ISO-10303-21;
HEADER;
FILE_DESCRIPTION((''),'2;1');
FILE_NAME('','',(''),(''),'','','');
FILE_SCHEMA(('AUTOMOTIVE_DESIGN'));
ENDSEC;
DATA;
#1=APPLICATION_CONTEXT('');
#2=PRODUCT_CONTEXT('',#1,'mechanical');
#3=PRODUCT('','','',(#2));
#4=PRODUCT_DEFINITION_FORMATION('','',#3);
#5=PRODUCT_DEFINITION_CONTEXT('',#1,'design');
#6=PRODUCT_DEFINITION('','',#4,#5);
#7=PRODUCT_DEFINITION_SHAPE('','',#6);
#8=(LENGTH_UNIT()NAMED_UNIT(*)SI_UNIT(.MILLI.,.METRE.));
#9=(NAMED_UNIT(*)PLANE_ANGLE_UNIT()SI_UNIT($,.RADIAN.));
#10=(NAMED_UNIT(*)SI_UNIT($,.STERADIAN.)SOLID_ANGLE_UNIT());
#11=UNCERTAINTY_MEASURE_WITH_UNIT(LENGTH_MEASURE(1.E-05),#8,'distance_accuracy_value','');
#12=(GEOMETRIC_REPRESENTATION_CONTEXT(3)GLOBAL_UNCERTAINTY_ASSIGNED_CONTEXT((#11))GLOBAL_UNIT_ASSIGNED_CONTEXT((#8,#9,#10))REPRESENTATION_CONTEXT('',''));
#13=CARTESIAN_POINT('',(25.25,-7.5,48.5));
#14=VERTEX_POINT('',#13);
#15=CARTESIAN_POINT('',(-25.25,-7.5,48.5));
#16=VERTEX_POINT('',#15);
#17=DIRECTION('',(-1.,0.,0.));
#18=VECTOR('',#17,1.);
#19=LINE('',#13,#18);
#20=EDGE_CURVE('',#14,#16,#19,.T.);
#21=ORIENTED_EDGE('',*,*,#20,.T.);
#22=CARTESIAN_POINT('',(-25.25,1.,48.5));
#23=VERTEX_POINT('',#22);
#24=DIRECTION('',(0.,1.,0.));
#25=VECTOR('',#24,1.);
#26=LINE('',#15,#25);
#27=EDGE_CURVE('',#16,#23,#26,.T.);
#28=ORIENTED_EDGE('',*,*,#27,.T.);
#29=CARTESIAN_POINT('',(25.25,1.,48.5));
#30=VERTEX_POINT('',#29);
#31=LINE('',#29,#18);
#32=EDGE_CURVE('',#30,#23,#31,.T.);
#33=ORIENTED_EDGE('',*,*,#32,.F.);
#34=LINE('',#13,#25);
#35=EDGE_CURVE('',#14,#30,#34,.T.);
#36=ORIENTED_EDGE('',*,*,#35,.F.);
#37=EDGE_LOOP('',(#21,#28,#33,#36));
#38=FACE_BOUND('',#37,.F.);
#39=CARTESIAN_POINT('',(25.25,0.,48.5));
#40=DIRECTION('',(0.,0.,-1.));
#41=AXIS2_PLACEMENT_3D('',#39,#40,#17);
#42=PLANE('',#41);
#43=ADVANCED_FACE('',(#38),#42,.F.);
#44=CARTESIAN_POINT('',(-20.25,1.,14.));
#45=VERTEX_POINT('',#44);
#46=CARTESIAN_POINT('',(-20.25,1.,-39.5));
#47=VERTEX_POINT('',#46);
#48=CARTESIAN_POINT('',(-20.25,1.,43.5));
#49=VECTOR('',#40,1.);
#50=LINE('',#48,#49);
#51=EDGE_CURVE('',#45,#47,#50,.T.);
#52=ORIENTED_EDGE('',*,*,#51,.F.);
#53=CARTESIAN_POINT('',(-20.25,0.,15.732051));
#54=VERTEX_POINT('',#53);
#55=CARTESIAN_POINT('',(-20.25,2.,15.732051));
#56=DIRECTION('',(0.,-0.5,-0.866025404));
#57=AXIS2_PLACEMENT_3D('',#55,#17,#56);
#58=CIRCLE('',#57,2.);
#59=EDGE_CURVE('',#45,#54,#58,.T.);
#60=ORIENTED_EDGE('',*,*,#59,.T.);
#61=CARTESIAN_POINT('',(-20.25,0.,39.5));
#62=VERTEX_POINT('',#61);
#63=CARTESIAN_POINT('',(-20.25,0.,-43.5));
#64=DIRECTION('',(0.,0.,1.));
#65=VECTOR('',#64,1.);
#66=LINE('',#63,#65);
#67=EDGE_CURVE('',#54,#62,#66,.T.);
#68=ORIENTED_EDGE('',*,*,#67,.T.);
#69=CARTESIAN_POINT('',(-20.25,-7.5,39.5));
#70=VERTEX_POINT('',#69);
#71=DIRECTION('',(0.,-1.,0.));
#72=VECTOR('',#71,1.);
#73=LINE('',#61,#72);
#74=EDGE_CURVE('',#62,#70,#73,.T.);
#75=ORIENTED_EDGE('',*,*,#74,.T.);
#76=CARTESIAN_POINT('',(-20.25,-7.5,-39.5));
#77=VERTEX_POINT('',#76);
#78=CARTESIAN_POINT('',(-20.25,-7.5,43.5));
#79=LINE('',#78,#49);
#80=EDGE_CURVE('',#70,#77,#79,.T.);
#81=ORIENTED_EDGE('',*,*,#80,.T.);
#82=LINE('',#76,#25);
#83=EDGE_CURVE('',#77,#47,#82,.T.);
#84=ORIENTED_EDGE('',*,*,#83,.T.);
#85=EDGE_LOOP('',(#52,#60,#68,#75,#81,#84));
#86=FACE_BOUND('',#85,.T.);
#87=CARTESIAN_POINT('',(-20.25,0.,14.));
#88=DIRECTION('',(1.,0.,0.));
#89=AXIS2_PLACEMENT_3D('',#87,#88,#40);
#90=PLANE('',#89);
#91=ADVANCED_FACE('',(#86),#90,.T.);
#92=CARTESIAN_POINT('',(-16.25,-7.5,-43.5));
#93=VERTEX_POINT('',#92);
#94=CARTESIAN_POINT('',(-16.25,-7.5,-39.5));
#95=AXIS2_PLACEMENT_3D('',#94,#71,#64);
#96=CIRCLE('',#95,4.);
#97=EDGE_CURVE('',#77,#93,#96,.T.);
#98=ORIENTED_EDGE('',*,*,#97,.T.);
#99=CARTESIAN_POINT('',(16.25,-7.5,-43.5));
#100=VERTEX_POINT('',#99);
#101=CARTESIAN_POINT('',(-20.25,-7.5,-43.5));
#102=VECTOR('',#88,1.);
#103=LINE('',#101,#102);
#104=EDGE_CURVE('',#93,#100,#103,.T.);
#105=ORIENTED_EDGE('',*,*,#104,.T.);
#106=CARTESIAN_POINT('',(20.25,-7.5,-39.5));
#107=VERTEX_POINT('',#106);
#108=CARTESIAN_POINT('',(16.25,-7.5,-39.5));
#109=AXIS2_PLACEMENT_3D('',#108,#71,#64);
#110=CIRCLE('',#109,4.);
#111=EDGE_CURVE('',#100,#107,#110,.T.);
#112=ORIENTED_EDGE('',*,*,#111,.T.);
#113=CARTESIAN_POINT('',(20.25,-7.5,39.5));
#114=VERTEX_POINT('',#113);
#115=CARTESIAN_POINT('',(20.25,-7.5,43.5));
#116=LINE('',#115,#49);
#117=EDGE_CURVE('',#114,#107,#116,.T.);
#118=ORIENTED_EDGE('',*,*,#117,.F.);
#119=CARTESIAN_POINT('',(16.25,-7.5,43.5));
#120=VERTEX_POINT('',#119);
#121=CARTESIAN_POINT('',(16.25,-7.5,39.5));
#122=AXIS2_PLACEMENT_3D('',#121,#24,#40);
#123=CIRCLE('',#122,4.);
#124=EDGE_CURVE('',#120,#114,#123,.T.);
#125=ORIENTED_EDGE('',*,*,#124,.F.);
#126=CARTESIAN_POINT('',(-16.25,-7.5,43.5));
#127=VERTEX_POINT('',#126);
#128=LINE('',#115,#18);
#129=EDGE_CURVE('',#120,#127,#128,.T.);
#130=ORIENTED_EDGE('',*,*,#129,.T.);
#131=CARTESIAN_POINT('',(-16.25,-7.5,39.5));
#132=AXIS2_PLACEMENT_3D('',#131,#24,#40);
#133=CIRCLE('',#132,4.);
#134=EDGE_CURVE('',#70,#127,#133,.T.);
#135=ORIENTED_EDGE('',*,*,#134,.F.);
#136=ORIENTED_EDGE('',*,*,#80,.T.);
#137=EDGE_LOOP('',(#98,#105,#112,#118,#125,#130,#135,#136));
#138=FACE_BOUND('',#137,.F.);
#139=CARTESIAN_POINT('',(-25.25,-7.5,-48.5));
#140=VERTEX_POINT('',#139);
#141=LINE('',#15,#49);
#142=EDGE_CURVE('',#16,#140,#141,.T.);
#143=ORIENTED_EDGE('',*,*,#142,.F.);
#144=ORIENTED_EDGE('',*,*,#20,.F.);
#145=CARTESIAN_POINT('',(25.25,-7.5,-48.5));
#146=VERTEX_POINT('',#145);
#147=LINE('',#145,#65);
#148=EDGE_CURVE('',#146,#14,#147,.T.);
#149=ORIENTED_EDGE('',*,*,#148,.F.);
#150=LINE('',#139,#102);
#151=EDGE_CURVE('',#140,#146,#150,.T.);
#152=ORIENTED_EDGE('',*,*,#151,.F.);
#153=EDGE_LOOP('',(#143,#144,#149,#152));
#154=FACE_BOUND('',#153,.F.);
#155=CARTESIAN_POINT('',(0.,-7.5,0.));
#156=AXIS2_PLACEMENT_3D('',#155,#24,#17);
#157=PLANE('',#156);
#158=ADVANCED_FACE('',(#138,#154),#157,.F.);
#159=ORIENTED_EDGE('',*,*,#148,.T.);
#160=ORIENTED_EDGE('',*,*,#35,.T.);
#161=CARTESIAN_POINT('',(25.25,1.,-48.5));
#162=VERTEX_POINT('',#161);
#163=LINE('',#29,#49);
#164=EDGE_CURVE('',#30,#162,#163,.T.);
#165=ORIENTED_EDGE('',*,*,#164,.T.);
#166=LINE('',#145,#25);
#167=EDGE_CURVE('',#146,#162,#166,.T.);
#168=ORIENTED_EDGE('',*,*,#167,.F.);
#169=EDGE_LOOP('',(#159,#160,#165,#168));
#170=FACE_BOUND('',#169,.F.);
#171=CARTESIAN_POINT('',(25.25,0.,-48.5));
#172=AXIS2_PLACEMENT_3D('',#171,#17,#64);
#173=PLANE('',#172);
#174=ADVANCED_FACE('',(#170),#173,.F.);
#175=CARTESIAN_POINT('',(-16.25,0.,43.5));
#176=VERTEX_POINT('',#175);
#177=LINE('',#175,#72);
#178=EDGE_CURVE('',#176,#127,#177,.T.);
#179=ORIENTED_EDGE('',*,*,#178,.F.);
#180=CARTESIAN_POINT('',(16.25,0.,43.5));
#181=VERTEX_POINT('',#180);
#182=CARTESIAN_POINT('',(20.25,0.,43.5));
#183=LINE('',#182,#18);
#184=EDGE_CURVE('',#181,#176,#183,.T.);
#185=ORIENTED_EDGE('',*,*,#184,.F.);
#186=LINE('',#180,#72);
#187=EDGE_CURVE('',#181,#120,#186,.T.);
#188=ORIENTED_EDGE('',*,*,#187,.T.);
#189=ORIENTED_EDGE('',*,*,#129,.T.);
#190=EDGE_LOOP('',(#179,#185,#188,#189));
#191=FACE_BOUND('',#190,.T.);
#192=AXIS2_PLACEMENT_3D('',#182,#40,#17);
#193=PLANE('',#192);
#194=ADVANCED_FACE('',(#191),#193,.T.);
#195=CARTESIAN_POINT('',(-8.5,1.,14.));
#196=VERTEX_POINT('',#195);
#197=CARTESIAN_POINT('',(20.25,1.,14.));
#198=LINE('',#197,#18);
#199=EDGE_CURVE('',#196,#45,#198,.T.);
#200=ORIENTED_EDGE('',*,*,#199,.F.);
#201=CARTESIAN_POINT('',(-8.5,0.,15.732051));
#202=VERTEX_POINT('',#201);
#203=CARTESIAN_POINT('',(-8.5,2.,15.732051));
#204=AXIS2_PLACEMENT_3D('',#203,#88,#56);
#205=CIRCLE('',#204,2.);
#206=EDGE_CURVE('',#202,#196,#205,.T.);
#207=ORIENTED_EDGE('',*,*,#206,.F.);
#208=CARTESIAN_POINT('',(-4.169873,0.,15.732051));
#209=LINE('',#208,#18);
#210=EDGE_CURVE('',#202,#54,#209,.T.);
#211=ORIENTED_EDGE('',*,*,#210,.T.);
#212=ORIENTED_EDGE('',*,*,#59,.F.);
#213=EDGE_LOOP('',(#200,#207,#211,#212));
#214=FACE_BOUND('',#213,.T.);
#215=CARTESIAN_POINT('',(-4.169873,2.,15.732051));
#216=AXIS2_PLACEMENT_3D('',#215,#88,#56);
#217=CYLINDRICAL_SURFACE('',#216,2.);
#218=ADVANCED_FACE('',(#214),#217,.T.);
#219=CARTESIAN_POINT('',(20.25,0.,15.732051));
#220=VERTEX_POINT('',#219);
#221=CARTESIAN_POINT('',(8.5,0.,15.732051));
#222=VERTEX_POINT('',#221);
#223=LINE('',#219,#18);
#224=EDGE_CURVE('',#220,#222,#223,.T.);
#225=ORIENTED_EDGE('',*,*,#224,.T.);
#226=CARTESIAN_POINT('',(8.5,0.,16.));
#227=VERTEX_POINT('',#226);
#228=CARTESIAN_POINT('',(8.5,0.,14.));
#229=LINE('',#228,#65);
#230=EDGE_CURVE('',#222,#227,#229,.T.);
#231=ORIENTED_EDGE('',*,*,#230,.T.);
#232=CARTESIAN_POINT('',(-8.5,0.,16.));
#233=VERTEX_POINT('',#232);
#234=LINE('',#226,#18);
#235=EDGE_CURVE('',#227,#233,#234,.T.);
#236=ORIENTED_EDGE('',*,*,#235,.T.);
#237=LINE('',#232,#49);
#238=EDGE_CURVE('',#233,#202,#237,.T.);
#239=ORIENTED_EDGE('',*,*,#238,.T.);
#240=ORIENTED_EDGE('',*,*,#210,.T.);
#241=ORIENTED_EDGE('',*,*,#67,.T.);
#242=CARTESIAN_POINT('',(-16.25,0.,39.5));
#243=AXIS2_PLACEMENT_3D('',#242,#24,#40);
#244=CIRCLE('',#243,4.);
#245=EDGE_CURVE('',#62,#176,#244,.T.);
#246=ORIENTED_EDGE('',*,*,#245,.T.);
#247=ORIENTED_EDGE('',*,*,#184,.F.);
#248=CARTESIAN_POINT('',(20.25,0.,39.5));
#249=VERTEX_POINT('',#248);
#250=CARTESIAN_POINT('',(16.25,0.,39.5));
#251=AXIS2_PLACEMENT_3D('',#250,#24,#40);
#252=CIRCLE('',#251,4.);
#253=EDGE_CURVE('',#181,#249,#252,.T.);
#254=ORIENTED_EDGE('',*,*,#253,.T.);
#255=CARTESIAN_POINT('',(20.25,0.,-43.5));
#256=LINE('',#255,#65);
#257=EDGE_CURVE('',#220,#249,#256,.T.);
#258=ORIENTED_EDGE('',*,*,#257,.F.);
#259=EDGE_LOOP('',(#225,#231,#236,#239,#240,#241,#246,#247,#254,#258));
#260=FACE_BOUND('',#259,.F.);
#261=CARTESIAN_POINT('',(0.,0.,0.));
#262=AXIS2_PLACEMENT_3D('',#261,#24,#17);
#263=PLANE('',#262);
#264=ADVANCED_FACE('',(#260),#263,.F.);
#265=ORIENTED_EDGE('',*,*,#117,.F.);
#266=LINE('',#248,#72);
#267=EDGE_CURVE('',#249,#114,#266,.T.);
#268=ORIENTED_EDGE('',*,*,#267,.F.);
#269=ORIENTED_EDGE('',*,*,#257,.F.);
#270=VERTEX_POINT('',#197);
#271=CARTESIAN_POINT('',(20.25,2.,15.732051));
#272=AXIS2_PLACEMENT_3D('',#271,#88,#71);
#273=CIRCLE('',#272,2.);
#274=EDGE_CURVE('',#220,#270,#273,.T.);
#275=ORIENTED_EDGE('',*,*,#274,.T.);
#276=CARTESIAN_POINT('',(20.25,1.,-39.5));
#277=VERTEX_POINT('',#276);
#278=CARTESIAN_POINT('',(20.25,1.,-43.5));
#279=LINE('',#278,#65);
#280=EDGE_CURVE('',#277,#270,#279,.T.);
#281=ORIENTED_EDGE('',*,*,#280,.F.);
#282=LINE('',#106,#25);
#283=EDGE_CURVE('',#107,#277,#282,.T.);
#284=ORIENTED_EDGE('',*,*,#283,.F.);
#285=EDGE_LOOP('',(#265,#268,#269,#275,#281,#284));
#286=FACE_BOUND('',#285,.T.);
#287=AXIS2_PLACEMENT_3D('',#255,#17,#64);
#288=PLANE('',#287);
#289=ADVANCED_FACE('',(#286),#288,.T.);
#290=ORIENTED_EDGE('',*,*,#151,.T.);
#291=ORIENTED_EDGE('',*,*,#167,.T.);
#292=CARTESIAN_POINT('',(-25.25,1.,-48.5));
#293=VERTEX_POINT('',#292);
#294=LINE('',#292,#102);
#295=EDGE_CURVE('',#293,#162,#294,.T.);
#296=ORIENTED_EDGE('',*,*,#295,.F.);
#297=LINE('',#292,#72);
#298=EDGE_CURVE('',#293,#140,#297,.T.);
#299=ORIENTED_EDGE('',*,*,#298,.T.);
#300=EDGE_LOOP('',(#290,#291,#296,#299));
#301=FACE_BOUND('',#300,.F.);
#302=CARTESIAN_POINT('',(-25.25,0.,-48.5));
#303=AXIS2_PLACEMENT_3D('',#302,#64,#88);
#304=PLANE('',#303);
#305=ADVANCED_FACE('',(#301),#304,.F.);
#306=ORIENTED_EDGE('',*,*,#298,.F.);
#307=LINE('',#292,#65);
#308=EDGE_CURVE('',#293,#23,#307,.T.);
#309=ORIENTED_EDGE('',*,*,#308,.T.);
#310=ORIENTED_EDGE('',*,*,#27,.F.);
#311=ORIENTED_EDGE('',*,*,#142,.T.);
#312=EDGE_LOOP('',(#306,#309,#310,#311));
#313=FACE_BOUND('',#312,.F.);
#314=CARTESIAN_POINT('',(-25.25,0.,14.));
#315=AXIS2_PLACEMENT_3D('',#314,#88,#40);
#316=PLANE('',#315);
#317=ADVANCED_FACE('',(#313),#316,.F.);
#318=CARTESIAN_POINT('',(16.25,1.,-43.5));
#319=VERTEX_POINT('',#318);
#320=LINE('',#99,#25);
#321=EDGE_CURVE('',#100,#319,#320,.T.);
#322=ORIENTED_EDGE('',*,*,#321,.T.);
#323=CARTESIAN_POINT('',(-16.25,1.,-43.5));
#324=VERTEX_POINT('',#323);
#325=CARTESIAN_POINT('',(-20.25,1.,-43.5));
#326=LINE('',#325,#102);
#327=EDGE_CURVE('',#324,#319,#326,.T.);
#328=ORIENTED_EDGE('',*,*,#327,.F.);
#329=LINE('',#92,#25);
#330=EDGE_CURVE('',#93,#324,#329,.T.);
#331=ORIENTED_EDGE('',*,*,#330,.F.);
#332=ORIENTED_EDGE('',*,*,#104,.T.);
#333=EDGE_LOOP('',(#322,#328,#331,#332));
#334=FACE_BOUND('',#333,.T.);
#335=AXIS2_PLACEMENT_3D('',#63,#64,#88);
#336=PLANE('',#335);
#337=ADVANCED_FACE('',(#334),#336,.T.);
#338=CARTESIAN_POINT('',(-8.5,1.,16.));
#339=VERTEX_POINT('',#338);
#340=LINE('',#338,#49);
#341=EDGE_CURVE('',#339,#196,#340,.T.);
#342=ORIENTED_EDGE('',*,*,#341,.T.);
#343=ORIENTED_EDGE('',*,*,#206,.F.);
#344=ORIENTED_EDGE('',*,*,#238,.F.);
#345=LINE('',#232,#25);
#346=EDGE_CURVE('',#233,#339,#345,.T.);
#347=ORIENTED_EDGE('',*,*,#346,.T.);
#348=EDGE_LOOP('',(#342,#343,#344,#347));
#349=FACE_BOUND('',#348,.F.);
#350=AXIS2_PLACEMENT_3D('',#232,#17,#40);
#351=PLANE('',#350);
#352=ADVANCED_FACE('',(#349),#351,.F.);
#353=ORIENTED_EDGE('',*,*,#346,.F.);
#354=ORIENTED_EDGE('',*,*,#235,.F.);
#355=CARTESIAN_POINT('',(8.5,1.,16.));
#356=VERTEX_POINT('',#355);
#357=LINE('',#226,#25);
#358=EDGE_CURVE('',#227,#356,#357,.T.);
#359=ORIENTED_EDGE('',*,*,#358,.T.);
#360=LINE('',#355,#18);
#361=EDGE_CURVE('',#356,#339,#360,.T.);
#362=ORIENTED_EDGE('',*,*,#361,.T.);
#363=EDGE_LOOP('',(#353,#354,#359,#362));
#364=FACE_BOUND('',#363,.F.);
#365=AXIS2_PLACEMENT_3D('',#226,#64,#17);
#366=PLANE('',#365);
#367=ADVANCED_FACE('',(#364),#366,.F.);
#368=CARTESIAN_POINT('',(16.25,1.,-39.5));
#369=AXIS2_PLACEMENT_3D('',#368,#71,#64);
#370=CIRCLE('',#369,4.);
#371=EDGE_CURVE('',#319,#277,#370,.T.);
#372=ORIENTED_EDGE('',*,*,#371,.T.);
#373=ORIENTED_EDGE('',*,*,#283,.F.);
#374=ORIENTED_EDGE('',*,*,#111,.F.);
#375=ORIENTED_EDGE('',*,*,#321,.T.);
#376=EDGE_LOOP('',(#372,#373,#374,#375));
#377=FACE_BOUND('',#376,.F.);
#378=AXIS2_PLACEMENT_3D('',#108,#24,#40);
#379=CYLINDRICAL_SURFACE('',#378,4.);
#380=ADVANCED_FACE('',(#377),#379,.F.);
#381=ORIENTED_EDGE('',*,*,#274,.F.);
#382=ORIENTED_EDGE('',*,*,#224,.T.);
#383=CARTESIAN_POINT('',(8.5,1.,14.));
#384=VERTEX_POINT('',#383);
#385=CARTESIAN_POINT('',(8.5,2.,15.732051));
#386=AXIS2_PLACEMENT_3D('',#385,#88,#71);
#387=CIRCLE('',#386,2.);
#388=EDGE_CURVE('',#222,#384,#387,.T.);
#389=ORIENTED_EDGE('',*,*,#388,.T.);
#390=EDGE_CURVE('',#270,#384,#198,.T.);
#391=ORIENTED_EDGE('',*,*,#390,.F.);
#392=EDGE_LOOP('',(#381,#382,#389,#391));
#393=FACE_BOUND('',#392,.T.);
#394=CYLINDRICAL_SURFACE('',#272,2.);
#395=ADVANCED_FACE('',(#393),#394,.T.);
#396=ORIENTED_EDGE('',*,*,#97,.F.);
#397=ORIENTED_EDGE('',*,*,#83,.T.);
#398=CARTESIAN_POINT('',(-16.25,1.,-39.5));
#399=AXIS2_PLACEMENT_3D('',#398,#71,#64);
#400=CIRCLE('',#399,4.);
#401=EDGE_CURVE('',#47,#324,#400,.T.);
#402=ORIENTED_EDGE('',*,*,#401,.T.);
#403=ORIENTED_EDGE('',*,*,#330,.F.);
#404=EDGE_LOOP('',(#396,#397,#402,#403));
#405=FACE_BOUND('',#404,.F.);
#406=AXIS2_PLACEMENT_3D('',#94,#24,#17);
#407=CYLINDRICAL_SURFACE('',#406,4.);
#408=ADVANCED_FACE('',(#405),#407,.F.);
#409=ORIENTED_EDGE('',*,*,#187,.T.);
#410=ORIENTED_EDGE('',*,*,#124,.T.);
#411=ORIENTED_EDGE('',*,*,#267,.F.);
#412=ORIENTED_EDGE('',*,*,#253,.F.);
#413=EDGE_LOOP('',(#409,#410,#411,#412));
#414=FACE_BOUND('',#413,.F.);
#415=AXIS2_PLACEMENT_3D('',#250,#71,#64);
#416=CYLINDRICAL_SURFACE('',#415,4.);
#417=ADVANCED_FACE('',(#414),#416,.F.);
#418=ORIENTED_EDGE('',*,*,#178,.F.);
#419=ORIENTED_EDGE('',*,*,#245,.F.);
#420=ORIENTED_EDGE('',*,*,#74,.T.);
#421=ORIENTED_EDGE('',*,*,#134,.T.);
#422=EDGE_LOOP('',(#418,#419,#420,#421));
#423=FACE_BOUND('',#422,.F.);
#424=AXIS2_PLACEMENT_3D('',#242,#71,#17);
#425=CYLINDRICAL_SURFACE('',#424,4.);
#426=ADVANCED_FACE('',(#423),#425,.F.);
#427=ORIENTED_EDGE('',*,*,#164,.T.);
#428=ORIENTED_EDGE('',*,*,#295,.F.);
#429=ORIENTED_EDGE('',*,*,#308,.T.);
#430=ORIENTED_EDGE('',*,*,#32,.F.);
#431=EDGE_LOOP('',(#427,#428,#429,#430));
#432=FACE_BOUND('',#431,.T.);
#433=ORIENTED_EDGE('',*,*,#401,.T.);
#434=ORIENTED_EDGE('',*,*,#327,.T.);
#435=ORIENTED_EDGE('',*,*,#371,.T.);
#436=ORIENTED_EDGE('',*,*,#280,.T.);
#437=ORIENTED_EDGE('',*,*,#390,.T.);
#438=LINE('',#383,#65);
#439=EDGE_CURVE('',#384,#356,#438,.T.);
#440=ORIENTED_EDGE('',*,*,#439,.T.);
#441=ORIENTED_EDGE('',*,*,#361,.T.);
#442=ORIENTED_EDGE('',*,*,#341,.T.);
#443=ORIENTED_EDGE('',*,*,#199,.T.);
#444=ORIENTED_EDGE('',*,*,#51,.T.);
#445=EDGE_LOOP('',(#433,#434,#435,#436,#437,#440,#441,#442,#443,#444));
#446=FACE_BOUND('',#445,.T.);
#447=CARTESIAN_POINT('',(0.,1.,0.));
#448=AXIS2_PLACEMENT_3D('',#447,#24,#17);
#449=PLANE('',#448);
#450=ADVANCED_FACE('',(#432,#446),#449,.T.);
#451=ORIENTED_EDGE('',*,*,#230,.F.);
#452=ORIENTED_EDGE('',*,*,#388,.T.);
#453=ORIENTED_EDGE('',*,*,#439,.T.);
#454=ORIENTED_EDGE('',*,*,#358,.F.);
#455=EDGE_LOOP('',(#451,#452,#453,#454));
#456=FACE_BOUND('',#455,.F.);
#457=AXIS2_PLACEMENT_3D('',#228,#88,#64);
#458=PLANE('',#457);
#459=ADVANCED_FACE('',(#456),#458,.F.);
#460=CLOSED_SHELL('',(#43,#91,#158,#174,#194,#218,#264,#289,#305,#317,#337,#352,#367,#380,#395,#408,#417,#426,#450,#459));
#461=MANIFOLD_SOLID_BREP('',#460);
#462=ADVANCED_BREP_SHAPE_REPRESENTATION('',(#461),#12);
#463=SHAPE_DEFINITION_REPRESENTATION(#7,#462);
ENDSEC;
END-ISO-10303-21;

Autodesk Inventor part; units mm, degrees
ref_plane "YZ Plane" through (0, 0, 0) normal (1, 0, 0) x (0, 1, 0)
ref_plane "XZ Plane" through (0, 0, 0) normal (0, 1, 0) x (-1, 0, 0)
ref_plane "XY Plane" through (0, 0, 0) normal (0, 0, 1) x (1, 0, 0)
sketch "Boceto1" plane through (0, 0, 0) normal (0, 1, 0) x (-1, 0, 0)
  line L0 (20.25, -43.5) -> (-20.25, -43.5)
  line L1 (-20.25, -43.5) -> (-20.25, 43.5)
  line L2 (-20.25, 43.5) -> (20.25, 43.5)
  line L3 (20.25, 43.5) -> (20.25, -43.5)
  line L4 (20.25, -43.5) -> (-20.25, 43.5) construction
  line L5 (-20.25, -43.5) -> (20.25, 43.5) construction
  line L6 (25.25, -48.5) -> (-25.25, -48.5)
  line L7 (-25.25, -48.5) -> (-25.25, 48.5)
  line L8 (-25.25, 48.5) -> (25.25, 48.5)
  line L9 (25.25, 48.5) -> (25.25, -48.5)
  line L10 (20.25, 43.5) -> (-20.25, 43.5)
  line L11 (-20.25, 43.5) -> (-20.25, 14)
  line L12 (-20.25, 14) -> (20.25, 14)
  line L13 (20.25, 14) -> (20.25, 43.5)
  line L14 (25.25, 14) -> (-25.25, 14)
  line L15 (21.25, -44.5) -> (-21.25, -44.5)
  line L16 (-21.25, -44.5) -> (-21.25, 44.5)
  line L17 (-21.25, 44.5) -> (21.25, 44.5)
  line L18 (21.25, 44.5) -> (21.25, -44.5)
  line L19 (8.5, 14) -> (-8.5, 14)
  line L20 (-8.5, 14) -> (-8.5, 16)
  line L21 (-8.5, 16) -> (8.5, 16)
  line L22 (8.5, 16) -> (8.5, 14)
  point P0 (0, 0)
  point P1 (0, 0)
  point P2 (-20.25, 14)
  point P3 (20.25, 14)
  point P4 (-20.25, 14)
  point P5 (0, 14)
  point P6 (-8.5, 14)
  dimension "d0" = 40.5
  dimension "d1" = 87
  dimension "d2" = 5
  dimension "d3" = 29.5
  dimension "d19" = 1
  dimension "d20" = 17
  dimension "d21" = 2
extrude "Extrusión4" add sketch "Boceto1" against normal blind 7.5 contours L3 L14 L18 L15 L16 L1 L0 | L3 L2 L1 L14 L16 L17 L18 | L18 L17 L16 L14 L7 L8 L9 | L14 L9 L6 L7 L16 L15 L18
extrude "Extrusión5" add sketch "Boceto1" along normal blind 1 contours L3 L14 L18 L15 L16 L1 L0 | L12 L22 L21 L20 L1 L2 L3 | L3 L2 L1 L14 L16 L17 L18 | L18 L17 L16 L14 L7 L8 L9 | L14 L9 L6 L7 L16 L15 L18
fillet "Empalme2" radius 4 4 edges at (-20.25, -3.25, -43.5) (20.25, -3.25, -43.5) (20.25, -3.75, 43.5) (-20.25, -3.75, 43.5)
fillet "Empalme3" radius 2 2 edges at (14.375, 0, 14) (-14.375, 0, 14)
properties part number "manija_puerta_marco_front_right_v2"
